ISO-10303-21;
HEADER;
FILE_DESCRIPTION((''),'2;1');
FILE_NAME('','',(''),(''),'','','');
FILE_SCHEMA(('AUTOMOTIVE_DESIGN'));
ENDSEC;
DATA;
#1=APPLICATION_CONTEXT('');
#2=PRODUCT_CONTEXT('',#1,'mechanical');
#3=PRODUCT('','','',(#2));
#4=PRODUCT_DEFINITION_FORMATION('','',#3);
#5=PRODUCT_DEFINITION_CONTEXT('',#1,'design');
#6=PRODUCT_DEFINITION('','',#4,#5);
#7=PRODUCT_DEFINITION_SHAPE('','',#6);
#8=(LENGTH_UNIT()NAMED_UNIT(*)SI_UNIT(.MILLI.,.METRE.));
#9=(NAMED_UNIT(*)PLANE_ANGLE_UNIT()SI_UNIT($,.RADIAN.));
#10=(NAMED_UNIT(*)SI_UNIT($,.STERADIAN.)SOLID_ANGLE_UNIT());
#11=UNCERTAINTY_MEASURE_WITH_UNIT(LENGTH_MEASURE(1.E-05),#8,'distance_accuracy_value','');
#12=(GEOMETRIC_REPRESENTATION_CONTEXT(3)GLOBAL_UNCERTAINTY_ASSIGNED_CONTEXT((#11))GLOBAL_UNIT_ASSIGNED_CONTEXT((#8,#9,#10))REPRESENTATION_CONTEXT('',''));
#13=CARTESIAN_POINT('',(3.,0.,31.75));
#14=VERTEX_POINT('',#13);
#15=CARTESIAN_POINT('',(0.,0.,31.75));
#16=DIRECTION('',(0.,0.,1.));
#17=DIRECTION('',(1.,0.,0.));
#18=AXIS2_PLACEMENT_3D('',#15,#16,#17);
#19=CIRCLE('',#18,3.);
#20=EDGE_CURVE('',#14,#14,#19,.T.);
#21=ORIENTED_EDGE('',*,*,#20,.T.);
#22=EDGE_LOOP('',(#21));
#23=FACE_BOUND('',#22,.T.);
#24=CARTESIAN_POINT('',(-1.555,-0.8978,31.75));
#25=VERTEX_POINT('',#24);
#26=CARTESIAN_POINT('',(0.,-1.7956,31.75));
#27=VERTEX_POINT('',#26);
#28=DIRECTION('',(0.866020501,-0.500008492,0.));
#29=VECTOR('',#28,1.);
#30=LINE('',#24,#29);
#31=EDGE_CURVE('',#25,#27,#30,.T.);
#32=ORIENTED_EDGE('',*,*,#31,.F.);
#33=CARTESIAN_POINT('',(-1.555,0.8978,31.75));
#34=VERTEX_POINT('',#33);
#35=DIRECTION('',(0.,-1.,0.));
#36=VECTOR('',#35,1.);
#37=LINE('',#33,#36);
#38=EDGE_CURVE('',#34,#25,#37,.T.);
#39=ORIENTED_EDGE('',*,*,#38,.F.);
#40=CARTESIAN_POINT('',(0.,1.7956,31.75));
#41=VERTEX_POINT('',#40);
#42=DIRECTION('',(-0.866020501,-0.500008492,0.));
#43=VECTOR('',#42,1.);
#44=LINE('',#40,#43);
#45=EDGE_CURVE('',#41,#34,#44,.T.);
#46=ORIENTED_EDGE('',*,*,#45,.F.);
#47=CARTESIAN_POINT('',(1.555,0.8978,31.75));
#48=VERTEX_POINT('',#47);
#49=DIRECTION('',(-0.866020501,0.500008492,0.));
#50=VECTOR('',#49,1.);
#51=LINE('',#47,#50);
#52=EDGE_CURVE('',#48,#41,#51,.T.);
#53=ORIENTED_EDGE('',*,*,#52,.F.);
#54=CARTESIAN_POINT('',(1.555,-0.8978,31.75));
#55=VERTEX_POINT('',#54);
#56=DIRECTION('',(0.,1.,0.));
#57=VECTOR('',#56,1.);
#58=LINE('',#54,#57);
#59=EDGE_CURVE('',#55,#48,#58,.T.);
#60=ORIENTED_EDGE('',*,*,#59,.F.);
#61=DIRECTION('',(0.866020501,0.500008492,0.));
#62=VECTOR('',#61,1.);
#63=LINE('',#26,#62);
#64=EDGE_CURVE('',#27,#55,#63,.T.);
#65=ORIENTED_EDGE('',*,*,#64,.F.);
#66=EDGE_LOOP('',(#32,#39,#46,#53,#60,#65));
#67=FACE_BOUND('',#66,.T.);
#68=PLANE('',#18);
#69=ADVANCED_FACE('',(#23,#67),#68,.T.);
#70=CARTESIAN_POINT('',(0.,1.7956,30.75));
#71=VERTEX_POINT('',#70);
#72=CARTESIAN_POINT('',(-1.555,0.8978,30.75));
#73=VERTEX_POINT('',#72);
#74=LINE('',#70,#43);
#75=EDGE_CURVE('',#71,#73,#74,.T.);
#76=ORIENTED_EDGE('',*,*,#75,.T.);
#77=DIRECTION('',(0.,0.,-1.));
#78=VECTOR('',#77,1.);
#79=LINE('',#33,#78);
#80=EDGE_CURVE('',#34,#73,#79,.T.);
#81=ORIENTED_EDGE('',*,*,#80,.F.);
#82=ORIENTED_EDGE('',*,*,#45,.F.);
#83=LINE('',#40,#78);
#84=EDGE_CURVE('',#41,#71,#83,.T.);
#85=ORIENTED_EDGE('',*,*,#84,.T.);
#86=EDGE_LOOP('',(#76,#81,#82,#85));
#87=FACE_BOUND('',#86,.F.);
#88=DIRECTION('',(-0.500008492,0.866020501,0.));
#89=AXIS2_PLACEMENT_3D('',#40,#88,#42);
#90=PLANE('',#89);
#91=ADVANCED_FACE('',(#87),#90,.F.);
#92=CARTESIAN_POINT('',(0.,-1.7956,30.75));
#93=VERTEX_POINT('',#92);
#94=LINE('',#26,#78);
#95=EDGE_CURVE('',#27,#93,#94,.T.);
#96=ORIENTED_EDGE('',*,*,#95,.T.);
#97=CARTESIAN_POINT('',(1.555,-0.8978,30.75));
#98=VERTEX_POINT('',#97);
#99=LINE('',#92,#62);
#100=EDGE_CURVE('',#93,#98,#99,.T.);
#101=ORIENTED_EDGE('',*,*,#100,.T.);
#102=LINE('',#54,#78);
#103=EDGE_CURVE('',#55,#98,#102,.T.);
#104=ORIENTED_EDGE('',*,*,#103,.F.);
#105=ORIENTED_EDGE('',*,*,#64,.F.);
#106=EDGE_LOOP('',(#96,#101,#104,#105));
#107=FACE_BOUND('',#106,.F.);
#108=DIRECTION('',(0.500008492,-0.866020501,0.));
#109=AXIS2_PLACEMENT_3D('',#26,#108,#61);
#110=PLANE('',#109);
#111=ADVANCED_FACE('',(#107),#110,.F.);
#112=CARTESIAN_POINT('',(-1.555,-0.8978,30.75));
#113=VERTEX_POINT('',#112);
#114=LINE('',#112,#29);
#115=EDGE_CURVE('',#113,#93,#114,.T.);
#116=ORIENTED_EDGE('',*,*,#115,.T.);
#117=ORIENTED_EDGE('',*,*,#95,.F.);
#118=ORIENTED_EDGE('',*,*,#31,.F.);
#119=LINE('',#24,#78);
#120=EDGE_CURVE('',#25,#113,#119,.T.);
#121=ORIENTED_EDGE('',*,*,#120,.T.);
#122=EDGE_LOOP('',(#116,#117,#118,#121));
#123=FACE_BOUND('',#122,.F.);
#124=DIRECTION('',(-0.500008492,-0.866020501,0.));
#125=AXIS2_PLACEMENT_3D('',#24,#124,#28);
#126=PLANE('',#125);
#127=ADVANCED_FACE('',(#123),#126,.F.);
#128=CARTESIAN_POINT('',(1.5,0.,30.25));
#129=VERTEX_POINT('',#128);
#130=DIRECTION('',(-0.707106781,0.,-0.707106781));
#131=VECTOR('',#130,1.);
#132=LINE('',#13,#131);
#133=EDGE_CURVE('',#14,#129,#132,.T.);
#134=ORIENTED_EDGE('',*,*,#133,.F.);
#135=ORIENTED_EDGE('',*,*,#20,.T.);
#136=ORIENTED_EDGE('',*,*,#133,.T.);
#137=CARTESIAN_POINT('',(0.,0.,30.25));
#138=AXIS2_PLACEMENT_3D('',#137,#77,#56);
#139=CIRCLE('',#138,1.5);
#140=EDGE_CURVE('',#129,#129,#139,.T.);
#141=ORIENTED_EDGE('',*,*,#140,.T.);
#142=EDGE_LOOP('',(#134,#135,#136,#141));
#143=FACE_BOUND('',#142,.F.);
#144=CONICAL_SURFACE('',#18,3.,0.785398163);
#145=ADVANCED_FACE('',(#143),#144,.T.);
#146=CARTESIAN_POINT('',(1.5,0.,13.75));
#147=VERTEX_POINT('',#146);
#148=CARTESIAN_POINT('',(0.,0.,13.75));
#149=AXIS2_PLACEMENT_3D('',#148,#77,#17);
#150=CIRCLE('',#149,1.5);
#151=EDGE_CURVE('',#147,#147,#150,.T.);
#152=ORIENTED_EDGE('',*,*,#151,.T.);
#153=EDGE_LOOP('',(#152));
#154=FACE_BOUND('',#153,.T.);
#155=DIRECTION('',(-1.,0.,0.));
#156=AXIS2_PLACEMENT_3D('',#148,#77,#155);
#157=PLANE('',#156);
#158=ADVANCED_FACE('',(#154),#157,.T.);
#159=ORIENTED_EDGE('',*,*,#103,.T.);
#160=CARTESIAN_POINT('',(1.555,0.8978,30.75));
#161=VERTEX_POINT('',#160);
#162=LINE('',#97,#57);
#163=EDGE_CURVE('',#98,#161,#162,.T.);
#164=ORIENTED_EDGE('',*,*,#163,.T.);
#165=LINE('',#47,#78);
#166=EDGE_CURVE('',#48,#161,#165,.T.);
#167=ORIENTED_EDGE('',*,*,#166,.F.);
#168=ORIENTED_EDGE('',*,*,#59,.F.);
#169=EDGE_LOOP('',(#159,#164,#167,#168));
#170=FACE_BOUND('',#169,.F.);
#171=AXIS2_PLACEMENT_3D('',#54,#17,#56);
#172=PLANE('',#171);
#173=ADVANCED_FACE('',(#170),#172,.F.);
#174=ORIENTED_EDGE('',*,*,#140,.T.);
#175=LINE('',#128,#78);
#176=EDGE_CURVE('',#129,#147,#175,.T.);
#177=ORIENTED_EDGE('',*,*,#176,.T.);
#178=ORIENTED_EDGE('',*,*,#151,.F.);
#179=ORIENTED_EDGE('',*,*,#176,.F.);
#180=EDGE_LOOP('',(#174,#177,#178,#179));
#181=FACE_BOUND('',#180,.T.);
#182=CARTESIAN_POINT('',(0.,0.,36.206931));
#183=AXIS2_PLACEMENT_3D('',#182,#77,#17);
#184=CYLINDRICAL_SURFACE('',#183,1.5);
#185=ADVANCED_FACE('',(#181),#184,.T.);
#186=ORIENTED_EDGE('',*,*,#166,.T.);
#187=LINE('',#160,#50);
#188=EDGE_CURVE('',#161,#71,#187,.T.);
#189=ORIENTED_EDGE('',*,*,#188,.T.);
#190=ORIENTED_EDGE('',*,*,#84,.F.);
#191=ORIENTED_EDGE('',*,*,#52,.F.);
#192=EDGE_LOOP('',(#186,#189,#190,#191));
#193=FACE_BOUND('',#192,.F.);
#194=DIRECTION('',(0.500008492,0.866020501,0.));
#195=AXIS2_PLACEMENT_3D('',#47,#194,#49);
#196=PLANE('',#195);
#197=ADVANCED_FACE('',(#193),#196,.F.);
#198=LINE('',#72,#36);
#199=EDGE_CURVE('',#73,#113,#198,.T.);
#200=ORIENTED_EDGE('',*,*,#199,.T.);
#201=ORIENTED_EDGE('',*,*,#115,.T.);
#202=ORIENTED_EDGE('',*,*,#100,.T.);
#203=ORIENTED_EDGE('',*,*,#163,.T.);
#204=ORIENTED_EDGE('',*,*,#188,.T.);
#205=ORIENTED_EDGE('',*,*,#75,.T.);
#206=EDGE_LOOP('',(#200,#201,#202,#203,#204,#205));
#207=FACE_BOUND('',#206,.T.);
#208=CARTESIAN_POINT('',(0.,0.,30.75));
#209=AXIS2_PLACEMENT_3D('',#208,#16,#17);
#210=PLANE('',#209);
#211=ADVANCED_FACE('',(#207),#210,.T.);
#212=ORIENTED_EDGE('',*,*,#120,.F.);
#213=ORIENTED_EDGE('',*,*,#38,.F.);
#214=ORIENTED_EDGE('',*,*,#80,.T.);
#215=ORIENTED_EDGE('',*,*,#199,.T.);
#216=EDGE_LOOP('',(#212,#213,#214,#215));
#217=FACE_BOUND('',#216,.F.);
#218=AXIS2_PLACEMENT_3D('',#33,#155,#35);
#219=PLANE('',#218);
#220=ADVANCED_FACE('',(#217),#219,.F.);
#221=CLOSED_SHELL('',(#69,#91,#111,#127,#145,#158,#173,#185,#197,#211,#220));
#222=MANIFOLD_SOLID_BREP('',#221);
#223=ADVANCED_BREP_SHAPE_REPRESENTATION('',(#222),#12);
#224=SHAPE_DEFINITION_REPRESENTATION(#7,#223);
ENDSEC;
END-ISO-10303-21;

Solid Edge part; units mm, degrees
sketch "Sketch1" plane through (0, 0, 0) normal (0, 0, 1) x (1, 0, 0)
  circle A0 centre (0, 0) radius 1.5
extrude "Protrusion1" add sketch "Sketch1" along normal blind 30
sketch "Sketch2" plane through (0, 0, 30) normal (0, 0, 1) x (1, 0, 0)
  circle A0 centre (0, 0) radius 3
extrude "ExtrudedProtrusion_2" add sketch "Sketch2" along normal blind 1.75
chamfer "Chamfer_1" distance 1.75 angle 45 1 edges at (-3, 0, 30)
sketch "Sketch3" plane through (0, 0, 31.75) normal (0, 0, 1) x (0, 1, 0)
  line L0 (0.8978, -1.555) -> (1.7956, 0)
  line L1 (1.7956, 0) -> (0.8978, 1.555)
  line L2 (0.8978, 1.555) -> (-0.8978, 1.555)
  line L3 (-0.8978, 1.555) -> (-1.7956, 0)
  line L4 (-1.7956, 0) -> (-0.8978, -1.555)
  line L5 (-0.8978, -1.555) -> (0.8978, -1.555)
extrude "ExtrudedCutout_1" cut sketch "Sketch3" against normal blind 1
sketch "Sketch4" plane through (0, 0, 0) normal (0, 0, -1) x (0, 1, 0)
  circle A0 centre (0, 0) radius 1.9215
extrude "ExtrudedCutout_2" cut sketch "Sketch4" against normal blind 13.75
properties material "Iron, grey cast type 20"
